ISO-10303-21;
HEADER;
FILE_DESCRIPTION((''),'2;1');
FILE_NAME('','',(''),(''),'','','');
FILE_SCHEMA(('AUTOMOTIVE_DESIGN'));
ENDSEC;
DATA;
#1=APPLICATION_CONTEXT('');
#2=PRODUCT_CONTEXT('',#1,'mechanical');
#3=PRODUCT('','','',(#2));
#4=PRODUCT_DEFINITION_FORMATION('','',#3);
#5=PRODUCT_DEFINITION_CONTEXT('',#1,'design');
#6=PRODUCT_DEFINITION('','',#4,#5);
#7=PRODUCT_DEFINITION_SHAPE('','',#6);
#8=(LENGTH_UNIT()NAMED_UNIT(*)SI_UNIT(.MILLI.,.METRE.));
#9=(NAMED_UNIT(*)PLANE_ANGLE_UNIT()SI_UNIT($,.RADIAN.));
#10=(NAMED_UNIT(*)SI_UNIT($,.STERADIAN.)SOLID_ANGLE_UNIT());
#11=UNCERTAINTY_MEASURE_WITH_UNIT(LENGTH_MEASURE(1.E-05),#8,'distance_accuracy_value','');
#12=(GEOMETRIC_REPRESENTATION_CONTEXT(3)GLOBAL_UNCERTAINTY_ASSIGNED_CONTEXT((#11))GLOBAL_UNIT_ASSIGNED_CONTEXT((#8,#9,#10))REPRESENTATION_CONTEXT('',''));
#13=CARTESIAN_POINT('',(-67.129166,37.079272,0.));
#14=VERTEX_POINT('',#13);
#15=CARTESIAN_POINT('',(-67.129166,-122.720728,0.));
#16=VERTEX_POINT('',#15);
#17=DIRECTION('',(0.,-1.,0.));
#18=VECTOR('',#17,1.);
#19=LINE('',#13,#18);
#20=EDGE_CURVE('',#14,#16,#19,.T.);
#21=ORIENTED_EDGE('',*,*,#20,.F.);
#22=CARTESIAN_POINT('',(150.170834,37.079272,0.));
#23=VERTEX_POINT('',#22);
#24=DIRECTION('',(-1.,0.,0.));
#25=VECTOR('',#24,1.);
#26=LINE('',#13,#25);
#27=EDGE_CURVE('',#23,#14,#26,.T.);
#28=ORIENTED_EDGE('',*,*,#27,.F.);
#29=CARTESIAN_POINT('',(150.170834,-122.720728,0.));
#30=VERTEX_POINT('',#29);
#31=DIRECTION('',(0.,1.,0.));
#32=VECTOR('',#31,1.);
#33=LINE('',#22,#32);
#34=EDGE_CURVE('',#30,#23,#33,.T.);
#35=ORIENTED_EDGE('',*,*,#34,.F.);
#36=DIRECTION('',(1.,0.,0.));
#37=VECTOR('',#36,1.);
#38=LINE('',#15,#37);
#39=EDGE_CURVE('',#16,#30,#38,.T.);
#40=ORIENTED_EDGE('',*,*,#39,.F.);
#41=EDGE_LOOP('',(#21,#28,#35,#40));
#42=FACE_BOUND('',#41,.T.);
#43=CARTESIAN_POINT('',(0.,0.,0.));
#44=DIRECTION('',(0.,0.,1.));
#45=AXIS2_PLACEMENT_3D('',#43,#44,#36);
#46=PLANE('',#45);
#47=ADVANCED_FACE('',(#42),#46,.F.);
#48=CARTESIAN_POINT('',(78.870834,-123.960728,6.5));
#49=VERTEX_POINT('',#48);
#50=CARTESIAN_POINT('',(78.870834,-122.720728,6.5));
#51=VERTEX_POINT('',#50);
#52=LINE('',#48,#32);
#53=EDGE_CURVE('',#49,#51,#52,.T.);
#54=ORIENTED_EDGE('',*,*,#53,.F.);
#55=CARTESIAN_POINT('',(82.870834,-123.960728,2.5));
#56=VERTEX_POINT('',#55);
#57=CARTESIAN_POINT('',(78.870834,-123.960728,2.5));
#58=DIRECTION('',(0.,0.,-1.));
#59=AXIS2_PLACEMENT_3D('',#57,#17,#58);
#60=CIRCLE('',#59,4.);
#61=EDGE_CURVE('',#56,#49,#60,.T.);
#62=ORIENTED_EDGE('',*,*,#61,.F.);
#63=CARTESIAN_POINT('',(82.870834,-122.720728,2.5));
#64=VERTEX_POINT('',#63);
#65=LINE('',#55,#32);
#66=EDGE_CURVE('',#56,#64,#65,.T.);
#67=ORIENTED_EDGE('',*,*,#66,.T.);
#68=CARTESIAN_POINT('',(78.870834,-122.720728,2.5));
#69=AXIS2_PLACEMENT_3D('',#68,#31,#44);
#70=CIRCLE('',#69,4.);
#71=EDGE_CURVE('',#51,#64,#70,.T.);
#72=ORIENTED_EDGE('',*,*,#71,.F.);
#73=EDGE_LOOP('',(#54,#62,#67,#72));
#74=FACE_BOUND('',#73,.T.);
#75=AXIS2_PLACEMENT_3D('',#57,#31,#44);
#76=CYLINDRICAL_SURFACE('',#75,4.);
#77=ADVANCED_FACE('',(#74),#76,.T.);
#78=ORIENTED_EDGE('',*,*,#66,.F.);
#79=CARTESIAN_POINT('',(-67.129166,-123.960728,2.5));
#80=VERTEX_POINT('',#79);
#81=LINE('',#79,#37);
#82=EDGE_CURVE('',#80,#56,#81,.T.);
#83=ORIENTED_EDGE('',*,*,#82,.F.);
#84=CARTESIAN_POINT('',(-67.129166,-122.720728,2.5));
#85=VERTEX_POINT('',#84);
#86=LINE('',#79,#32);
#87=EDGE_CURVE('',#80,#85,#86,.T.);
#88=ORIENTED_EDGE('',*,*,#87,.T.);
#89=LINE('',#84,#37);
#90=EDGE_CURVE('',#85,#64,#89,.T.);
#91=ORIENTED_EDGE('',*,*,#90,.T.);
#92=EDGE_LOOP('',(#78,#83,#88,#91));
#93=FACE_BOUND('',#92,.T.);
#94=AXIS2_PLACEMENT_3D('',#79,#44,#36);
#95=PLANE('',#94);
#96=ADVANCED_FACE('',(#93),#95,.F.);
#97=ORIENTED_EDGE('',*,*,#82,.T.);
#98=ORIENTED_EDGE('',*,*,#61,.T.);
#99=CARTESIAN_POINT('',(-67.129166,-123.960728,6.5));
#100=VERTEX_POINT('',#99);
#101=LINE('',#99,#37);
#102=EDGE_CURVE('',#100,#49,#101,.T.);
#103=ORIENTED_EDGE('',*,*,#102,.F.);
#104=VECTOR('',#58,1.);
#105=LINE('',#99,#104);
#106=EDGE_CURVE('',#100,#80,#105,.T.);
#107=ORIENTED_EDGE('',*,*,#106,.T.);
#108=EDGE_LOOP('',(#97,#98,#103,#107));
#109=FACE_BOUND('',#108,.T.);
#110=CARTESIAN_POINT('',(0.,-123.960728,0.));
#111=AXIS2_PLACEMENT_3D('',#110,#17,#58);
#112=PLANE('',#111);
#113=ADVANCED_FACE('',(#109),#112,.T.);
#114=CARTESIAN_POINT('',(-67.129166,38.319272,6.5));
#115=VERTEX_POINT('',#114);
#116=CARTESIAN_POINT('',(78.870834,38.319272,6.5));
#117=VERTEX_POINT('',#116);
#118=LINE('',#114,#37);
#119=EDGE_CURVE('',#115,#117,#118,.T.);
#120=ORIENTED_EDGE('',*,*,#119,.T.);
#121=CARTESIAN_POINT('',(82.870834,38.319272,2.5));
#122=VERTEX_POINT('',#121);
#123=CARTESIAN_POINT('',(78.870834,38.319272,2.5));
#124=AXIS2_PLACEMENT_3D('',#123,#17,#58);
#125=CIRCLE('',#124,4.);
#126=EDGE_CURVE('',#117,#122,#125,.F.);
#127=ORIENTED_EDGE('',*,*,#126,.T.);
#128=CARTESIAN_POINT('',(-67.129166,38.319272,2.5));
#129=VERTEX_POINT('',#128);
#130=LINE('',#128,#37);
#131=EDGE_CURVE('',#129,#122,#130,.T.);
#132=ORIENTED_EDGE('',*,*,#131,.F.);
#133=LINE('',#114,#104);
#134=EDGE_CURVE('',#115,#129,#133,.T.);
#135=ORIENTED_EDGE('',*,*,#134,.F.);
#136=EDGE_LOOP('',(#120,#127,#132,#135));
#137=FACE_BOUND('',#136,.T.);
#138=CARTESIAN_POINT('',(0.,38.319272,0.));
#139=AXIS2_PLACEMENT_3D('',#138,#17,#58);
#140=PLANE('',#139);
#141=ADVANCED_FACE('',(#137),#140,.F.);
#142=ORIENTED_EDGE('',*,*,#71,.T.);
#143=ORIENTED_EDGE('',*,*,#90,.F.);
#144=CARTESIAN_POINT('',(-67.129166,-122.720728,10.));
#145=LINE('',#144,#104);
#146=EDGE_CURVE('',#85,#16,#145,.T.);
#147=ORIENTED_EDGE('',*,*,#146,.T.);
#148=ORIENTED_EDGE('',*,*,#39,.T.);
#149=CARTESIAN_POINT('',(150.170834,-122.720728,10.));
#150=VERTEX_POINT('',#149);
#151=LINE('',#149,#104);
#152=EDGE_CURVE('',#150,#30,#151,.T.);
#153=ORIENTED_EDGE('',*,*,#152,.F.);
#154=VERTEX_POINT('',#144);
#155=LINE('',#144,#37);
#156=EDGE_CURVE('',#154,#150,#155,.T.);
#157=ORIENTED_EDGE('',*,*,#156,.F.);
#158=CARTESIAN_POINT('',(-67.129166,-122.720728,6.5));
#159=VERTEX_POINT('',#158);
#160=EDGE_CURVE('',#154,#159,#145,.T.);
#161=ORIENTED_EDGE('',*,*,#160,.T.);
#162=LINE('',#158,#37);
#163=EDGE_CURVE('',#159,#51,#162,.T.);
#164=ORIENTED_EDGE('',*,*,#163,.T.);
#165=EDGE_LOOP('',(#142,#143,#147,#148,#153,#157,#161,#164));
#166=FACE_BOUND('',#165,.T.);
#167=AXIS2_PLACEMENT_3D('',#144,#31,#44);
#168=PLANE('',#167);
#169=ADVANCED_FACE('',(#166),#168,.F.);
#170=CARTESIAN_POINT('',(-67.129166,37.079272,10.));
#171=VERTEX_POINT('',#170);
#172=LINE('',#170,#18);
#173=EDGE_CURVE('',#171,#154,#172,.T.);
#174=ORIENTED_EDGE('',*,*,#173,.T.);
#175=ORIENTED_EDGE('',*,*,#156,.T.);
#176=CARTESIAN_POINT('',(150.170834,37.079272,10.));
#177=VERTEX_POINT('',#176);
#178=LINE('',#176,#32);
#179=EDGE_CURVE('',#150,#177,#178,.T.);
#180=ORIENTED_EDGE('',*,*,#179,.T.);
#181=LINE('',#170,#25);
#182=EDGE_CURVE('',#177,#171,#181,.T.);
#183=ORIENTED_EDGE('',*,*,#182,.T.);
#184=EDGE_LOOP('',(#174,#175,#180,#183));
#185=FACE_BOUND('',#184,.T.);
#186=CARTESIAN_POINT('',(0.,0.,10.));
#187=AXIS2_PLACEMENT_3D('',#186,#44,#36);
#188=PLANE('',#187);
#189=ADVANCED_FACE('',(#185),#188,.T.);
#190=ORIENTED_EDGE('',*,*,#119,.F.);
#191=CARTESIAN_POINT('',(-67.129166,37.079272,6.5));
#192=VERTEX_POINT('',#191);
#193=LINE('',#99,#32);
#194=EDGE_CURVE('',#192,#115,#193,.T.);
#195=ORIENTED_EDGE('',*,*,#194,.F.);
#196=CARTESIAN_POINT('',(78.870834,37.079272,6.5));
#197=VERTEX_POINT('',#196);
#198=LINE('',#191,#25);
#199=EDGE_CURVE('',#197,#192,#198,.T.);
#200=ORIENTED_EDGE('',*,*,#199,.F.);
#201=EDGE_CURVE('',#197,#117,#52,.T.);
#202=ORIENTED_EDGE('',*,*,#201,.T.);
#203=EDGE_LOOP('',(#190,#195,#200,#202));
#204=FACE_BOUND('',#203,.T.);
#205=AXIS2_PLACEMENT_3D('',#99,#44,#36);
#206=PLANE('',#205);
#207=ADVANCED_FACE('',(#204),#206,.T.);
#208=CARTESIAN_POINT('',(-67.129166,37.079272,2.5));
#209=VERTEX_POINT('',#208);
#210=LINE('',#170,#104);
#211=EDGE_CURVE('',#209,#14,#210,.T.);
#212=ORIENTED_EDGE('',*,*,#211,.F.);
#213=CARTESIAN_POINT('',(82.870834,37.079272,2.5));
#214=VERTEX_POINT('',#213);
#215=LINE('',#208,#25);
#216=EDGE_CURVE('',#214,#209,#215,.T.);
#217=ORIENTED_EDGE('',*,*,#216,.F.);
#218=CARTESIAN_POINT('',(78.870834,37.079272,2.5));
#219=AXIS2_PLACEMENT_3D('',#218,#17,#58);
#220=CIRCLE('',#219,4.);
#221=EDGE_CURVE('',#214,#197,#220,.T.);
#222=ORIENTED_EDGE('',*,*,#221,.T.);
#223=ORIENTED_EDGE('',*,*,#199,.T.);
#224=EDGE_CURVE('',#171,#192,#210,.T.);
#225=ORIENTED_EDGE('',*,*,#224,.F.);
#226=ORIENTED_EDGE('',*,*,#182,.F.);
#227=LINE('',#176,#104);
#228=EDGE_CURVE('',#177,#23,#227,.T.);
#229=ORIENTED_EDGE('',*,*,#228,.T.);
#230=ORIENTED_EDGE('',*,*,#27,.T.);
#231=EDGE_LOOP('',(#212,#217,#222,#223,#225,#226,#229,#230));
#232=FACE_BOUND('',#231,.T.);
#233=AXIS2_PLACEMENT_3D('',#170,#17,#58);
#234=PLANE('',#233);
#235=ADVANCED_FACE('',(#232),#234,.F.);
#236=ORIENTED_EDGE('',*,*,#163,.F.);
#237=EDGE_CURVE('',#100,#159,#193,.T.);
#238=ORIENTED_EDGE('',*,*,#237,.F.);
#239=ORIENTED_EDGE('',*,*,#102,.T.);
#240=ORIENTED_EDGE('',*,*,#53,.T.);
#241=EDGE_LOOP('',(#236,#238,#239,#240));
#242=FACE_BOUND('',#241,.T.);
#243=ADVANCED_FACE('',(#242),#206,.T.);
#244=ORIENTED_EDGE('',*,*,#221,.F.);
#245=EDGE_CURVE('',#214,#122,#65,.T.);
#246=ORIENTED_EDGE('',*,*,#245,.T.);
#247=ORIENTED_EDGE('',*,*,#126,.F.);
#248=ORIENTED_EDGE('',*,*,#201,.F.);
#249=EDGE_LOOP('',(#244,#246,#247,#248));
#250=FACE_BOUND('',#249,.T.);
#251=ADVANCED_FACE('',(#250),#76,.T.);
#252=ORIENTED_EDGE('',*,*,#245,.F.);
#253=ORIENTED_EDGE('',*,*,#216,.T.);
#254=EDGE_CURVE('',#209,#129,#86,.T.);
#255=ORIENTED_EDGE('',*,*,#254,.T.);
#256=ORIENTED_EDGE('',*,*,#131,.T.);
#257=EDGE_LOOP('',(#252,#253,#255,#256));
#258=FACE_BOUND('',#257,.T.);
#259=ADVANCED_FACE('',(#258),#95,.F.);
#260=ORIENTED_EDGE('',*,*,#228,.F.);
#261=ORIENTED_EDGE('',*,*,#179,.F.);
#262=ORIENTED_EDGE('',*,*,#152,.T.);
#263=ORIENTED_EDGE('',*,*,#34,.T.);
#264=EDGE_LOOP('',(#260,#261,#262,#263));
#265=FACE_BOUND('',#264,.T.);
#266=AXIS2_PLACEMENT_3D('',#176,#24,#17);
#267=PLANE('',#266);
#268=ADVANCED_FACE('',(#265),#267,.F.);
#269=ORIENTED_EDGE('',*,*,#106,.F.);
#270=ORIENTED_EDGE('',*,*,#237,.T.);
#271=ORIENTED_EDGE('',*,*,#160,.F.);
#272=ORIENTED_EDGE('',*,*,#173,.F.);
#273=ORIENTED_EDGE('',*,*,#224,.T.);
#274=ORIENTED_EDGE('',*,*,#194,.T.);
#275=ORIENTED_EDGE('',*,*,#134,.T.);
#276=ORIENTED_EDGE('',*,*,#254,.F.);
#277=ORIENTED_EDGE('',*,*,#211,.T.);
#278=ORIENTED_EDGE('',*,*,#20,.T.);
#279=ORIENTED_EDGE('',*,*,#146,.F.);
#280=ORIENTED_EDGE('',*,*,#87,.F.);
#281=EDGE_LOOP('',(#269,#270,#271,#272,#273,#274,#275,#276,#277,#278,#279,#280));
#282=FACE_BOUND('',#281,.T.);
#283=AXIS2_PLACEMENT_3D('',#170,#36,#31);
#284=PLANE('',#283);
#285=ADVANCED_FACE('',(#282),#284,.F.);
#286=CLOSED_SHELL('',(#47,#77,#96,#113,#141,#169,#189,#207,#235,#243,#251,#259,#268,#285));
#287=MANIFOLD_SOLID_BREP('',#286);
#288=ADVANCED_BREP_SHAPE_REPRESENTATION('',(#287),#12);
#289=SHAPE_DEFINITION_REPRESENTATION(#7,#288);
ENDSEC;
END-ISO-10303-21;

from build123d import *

# Parameters (mm, degrees)
ESBO_O1_W                     = 217.3
ESBO_O1_H                     = 159.8
RESSALTO_EXTRUS_O1_DEPTH      = 10
RESSALTO_EXTRUS_O2_DEPTH      = 1.24
RESSALTO_EXTRUS_O2_DEPTH_BACK = 161.04
ESBO_O2_W                     = 150
ESBO_O2_H                     = 4
FILETE1_R                     = 4
FILETE2_R                     = 4


with BuildPart() as part:
    # Esboço1 → Ressalto-extrusão1 (new body)
    with BuildSketch(Plane.XY):
        with Locations((41.520834075, -42.82072758)):
            Rectangle(ESBO_O1_W, ESBO_O1_H)
    extrude(amount=RESSALTO_EXTRUS_O1_DEPTH)

    # Esboço2 → Ressalto-extrusão2 (add, two sides: drawn at the far end of the back side and taken through both)
    with BuildSketch(Plane(origin=(0, 37.07927242, 0), x_dir=(1, 0, 0), z_dir=(0, 1, 0)).offset(-RESSALTO_EXTRUS_O2_DEPTH_BACK)):
        with Locations((7.870834075, -4.5)):
            Rectangle(ESBO_O2_W, ESBO_O2_H)
    extrude(amount=RESSALTO_EXTRUS_O2_DEPTH + RESSALTO_EXTRUS_O2_DEPTH_BACK)

    # Filete1
    filete1_edges = [part.edges().sort_by_distance(p)[0] for p in [
        (82.870834075, -123.34072758, 6.5),
    ]]
    fillet(filete1_edges, radius=FILETE1_R - 0.0001)  # a hair under: the kernel refuses the full size

    # Filete2
    filete2_edges = [part.edges().sort_by_distance(p)[0] for p in [
        (82.870834075, 37.69927242, 6.5),
    ]]
    fillet(filete2_edges, radius=FILETE2_R - 0.0001)  # a hair under: the kernel refuses the full size


solid = part.part
